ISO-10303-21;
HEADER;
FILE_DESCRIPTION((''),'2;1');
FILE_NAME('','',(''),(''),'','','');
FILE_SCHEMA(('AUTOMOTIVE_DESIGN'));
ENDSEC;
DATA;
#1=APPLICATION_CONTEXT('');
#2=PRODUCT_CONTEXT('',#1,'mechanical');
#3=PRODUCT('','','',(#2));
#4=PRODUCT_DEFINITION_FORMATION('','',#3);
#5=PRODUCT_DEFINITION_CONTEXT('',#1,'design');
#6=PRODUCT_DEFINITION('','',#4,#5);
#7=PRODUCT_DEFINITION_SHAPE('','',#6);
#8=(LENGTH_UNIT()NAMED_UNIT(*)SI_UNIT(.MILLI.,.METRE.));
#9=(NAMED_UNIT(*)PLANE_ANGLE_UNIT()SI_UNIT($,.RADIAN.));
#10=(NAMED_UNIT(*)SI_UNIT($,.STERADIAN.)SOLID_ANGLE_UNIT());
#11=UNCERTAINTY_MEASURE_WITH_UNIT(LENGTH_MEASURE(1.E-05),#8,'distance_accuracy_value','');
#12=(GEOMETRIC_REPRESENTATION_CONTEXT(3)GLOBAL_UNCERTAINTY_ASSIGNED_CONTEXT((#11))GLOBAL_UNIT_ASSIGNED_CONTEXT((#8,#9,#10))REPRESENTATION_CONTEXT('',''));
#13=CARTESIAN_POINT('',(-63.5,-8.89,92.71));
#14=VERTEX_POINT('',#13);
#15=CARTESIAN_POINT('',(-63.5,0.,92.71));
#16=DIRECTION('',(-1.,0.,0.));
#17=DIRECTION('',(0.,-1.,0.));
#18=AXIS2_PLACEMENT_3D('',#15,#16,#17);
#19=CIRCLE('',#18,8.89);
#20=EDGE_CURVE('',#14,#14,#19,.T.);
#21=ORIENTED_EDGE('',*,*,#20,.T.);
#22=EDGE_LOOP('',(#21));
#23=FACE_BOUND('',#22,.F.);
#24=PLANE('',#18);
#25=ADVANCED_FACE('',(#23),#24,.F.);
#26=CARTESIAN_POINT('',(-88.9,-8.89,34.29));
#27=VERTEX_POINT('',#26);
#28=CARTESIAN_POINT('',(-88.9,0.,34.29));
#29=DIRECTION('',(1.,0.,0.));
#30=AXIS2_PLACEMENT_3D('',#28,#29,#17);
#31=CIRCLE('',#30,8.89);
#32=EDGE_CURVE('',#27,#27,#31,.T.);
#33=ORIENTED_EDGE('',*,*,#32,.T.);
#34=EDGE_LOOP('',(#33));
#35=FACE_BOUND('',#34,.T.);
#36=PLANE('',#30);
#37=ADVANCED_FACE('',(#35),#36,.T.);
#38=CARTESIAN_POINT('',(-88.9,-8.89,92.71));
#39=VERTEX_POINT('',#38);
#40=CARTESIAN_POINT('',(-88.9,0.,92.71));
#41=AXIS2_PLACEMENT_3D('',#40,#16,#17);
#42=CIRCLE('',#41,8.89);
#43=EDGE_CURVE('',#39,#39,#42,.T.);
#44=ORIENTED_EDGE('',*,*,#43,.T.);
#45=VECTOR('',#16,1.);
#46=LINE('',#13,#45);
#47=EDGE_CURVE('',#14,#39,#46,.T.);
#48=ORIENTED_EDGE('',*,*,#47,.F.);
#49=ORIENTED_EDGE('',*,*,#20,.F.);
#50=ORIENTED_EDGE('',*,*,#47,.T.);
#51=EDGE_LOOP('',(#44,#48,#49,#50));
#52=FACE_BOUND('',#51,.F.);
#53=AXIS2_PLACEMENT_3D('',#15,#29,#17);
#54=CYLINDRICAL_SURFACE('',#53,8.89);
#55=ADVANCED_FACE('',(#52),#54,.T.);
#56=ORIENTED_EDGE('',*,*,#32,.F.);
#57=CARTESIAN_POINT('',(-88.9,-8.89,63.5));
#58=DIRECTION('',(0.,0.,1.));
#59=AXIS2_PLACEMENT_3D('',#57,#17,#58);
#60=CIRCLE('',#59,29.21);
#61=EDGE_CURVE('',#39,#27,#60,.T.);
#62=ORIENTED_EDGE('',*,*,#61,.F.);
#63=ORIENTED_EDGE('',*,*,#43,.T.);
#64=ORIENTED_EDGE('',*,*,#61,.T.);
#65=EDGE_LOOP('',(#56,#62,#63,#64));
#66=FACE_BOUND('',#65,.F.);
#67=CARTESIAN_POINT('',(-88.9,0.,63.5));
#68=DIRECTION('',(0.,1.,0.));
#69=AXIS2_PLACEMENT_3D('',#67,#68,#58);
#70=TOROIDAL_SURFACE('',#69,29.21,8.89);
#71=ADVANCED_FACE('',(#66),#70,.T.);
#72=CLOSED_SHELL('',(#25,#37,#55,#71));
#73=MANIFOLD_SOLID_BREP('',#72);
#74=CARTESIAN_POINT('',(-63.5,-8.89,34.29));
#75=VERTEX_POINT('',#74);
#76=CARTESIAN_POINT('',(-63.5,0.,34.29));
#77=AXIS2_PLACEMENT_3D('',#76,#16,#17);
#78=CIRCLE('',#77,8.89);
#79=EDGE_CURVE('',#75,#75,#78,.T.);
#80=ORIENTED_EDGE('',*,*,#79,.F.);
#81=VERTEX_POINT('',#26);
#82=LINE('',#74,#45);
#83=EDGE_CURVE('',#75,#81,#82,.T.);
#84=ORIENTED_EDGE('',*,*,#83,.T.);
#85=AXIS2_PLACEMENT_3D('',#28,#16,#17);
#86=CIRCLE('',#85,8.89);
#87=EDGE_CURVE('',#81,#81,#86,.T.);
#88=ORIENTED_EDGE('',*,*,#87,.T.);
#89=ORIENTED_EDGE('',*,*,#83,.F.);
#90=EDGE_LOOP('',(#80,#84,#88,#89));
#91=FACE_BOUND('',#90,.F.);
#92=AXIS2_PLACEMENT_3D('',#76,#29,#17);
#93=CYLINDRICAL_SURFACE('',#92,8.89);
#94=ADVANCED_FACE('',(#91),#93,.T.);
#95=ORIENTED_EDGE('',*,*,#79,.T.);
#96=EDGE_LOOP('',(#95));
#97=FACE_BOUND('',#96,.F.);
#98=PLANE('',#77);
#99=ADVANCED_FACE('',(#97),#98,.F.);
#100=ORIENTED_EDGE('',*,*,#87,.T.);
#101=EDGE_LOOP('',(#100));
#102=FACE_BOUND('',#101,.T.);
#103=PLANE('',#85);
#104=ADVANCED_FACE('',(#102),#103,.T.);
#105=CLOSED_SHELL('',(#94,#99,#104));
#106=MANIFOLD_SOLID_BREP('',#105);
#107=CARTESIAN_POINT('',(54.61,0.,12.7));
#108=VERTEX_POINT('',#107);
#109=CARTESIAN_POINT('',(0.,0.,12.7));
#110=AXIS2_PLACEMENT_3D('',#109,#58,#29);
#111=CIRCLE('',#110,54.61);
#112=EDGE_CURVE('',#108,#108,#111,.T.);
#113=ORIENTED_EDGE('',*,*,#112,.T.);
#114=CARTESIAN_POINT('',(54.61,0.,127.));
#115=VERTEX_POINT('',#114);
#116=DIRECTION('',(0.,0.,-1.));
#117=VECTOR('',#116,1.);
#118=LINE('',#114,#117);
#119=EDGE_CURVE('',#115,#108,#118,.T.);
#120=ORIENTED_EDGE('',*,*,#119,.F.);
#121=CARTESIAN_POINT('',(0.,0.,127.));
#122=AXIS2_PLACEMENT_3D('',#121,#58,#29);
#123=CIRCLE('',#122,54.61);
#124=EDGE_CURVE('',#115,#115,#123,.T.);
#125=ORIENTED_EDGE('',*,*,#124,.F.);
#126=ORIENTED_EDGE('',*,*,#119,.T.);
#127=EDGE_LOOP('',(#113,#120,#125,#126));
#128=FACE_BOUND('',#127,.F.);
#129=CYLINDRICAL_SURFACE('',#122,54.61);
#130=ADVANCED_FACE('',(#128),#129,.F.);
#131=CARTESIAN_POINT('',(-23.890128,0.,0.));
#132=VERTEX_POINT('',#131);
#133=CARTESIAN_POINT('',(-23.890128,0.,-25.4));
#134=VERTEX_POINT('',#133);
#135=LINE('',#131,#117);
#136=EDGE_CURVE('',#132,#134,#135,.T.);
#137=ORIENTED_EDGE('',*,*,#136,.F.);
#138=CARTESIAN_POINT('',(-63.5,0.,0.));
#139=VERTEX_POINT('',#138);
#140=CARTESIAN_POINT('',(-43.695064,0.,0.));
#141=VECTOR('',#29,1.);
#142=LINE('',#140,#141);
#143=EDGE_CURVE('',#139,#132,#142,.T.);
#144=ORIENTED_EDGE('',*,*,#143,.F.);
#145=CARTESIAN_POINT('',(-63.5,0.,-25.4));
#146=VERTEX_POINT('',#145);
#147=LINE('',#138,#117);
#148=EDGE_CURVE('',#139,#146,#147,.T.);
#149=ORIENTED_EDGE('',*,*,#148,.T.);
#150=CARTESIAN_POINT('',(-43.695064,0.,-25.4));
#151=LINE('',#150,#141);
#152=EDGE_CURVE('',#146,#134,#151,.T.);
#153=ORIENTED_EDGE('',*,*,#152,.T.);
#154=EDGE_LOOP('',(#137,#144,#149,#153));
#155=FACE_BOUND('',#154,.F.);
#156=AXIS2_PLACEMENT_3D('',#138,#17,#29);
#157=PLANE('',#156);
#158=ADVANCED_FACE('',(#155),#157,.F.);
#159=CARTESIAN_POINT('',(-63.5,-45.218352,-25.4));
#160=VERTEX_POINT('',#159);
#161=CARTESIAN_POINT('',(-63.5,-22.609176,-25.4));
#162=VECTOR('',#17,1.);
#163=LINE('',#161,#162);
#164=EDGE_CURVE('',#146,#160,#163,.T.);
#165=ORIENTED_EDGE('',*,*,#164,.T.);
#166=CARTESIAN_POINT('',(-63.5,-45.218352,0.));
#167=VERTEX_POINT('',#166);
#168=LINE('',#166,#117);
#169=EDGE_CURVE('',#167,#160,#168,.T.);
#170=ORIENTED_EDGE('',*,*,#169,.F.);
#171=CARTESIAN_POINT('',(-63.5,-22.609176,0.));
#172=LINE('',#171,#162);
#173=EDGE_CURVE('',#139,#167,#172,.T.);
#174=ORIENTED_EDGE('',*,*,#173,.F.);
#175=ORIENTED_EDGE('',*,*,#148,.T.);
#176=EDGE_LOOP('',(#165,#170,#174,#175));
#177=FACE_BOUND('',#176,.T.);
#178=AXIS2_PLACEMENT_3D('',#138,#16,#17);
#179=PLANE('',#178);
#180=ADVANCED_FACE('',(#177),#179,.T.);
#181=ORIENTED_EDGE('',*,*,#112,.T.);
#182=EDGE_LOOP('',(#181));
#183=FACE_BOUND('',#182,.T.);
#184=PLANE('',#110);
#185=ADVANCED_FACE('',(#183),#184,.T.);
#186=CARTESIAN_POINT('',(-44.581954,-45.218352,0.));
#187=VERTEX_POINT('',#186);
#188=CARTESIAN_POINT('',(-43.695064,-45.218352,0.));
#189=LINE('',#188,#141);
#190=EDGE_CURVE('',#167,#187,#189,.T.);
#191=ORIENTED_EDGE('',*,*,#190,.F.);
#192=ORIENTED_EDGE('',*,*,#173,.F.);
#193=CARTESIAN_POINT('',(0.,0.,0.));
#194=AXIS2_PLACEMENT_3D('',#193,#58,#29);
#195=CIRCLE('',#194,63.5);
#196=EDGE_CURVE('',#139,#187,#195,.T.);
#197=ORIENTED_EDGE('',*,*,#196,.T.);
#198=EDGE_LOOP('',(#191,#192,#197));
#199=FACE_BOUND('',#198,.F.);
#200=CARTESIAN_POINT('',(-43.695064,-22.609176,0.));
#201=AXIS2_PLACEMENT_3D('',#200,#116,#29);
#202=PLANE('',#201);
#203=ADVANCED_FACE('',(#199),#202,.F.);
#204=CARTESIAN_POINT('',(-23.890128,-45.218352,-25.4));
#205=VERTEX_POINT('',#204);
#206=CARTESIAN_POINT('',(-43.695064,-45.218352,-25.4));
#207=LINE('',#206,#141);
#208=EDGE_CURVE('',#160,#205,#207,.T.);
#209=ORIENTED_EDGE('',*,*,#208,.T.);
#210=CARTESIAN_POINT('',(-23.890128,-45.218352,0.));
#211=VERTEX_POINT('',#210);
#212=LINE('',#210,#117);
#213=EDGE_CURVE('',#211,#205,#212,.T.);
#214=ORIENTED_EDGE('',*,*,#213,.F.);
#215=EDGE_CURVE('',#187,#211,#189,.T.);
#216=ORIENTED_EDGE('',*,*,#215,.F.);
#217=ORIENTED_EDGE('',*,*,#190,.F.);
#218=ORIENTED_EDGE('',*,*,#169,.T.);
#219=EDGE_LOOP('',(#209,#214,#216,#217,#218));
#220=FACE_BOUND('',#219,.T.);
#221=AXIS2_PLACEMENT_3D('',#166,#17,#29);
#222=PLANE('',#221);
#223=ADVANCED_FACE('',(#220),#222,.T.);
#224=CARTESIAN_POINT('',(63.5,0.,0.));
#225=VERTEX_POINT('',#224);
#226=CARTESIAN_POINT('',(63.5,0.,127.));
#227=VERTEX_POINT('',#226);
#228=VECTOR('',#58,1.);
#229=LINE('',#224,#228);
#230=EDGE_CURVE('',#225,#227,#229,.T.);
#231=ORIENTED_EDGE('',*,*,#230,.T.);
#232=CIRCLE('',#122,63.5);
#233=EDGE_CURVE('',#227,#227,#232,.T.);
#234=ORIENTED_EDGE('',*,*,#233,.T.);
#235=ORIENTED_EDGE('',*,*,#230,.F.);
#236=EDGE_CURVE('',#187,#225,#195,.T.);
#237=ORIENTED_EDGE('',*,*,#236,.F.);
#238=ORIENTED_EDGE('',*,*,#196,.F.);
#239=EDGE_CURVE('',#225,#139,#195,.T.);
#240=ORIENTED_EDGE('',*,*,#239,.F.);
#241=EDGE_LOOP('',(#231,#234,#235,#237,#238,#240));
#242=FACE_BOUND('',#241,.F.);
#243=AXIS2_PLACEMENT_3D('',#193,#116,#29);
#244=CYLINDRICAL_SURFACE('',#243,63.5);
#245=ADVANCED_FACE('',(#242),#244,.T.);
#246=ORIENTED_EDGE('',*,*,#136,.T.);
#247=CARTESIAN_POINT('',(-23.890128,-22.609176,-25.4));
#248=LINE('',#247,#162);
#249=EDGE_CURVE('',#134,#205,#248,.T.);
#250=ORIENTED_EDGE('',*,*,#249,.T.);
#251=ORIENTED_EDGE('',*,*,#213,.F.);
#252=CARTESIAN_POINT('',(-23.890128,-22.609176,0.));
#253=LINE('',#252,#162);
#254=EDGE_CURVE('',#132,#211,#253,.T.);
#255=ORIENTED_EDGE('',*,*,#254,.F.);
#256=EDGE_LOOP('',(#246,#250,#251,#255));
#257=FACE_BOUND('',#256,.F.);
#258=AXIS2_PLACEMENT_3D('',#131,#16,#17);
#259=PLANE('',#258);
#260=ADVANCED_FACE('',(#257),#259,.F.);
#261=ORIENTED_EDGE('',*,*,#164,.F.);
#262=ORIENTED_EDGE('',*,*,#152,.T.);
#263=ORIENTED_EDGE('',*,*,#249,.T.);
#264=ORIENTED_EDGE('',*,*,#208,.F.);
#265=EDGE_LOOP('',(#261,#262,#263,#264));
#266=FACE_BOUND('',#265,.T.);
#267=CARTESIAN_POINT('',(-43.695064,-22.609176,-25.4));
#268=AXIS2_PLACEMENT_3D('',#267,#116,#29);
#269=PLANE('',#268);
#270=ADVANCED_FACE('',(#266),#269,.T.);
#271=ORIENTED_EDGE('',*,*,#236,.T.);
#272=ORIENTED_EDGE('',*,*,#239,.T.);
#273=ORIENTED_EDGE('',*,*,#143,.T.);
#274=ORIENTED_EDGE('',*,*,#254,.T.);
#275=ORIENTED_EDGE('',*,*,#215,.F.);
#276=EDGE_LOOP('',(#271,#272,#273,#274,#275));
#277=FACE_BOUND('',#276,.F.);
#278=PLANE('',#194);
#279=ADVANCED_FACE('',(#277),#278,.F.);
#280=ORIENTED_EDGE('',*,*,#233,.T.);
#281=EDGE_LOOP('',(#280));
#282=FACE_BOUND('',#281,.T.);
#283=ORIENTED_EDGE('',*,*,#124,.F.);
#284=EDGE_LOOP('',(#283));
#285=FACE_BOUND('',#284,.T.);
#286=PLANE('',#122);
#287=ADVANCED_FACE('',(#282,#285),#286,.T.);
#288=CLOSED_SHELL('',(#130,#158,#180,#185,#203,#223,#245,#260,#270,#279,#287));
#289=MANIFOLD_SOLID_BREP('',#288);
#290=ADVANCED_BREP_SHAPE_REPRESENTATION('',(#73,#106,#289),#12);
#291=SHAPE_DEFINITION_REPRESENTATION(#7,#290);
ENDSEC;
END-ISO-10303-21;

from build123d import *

# Parameters (mm, degrees)
F0_R     = 63.5
F1_DEPTH = 127
F2_R     = 54.61
F3_DEPTH = 114.3
F4_W     = 39.6098716408
F4_H     = 45.2183522284
F5_DEPTH = 25.4
F6_R     = 8.89
F7_DEPTH = 25.4
F8_R     = 8.89
F9_ANGLE = 180


with BuildPart() as f1:
    # F0 (on Top) → F1 (new body)
    with BuildSketch(Plane.XY):
        Circle(F0_R)
    extrude(amount=F1_DEPTH)

    # F2 (on face) → F3 (cut)
    with BuildSketch(Plane.XY.offset(127)):
        Circle(F2_R)
    extrude(amount=-F3_DEPTH, mode=Mode.SUBTRACT)

    # F4 (on face) → F5 (join)
    with BuildSketch(Plane(origin=(0, 0, 0), x_dir=(1, 0, 0), z_dir=(0, 0, -1))):
        with Locations((-43.6950641796, 22.6091761142)):
            Rectangle(F4_W, F4_H)
    extrude(amount=F5_DEPTH)


with BuildPart() as f7:
    # F6 (on face) → F7 (new body)
    with BuildSketch(Plane(origin=(-63.5, 0, 0), x_dir=(0, -1, 0), z_dir=(-1, 0, 0))):
        with Locations((0, 92.71)):
            Circle(F6_R)
    extrude(amount=F7_DEPTH)

    # F8 (on face) → F9 (revolve)
    with BuildSketch(Plane(origin=(-88.9, 0, 0), x_dir=(0, -1, 0), z_dir=(-1, 0, 0))):
        with Locations((0, 92.71)):
            Circle(F8_R)
    revolve(axis=Axis((-88.9, 0.4127491266, 63.5), (0, -1, 0)), revolution_arc=F9_ANGLE)


with BuildPart() as f7b:
    # F6 (on face) → F7, piece 2 (new body)
    with BuildSketch(Plane(origin=(-63.5, 0, 0), x_dir=(0, -1, 0), z_dir=(-1, 0, 0))):
        with Locations((0, 34.29)):
            Circle(F6_R)
    extrude(amount=F7_DEPTH)


solid = Compound([f1.part, f7.part, f7b.part])
